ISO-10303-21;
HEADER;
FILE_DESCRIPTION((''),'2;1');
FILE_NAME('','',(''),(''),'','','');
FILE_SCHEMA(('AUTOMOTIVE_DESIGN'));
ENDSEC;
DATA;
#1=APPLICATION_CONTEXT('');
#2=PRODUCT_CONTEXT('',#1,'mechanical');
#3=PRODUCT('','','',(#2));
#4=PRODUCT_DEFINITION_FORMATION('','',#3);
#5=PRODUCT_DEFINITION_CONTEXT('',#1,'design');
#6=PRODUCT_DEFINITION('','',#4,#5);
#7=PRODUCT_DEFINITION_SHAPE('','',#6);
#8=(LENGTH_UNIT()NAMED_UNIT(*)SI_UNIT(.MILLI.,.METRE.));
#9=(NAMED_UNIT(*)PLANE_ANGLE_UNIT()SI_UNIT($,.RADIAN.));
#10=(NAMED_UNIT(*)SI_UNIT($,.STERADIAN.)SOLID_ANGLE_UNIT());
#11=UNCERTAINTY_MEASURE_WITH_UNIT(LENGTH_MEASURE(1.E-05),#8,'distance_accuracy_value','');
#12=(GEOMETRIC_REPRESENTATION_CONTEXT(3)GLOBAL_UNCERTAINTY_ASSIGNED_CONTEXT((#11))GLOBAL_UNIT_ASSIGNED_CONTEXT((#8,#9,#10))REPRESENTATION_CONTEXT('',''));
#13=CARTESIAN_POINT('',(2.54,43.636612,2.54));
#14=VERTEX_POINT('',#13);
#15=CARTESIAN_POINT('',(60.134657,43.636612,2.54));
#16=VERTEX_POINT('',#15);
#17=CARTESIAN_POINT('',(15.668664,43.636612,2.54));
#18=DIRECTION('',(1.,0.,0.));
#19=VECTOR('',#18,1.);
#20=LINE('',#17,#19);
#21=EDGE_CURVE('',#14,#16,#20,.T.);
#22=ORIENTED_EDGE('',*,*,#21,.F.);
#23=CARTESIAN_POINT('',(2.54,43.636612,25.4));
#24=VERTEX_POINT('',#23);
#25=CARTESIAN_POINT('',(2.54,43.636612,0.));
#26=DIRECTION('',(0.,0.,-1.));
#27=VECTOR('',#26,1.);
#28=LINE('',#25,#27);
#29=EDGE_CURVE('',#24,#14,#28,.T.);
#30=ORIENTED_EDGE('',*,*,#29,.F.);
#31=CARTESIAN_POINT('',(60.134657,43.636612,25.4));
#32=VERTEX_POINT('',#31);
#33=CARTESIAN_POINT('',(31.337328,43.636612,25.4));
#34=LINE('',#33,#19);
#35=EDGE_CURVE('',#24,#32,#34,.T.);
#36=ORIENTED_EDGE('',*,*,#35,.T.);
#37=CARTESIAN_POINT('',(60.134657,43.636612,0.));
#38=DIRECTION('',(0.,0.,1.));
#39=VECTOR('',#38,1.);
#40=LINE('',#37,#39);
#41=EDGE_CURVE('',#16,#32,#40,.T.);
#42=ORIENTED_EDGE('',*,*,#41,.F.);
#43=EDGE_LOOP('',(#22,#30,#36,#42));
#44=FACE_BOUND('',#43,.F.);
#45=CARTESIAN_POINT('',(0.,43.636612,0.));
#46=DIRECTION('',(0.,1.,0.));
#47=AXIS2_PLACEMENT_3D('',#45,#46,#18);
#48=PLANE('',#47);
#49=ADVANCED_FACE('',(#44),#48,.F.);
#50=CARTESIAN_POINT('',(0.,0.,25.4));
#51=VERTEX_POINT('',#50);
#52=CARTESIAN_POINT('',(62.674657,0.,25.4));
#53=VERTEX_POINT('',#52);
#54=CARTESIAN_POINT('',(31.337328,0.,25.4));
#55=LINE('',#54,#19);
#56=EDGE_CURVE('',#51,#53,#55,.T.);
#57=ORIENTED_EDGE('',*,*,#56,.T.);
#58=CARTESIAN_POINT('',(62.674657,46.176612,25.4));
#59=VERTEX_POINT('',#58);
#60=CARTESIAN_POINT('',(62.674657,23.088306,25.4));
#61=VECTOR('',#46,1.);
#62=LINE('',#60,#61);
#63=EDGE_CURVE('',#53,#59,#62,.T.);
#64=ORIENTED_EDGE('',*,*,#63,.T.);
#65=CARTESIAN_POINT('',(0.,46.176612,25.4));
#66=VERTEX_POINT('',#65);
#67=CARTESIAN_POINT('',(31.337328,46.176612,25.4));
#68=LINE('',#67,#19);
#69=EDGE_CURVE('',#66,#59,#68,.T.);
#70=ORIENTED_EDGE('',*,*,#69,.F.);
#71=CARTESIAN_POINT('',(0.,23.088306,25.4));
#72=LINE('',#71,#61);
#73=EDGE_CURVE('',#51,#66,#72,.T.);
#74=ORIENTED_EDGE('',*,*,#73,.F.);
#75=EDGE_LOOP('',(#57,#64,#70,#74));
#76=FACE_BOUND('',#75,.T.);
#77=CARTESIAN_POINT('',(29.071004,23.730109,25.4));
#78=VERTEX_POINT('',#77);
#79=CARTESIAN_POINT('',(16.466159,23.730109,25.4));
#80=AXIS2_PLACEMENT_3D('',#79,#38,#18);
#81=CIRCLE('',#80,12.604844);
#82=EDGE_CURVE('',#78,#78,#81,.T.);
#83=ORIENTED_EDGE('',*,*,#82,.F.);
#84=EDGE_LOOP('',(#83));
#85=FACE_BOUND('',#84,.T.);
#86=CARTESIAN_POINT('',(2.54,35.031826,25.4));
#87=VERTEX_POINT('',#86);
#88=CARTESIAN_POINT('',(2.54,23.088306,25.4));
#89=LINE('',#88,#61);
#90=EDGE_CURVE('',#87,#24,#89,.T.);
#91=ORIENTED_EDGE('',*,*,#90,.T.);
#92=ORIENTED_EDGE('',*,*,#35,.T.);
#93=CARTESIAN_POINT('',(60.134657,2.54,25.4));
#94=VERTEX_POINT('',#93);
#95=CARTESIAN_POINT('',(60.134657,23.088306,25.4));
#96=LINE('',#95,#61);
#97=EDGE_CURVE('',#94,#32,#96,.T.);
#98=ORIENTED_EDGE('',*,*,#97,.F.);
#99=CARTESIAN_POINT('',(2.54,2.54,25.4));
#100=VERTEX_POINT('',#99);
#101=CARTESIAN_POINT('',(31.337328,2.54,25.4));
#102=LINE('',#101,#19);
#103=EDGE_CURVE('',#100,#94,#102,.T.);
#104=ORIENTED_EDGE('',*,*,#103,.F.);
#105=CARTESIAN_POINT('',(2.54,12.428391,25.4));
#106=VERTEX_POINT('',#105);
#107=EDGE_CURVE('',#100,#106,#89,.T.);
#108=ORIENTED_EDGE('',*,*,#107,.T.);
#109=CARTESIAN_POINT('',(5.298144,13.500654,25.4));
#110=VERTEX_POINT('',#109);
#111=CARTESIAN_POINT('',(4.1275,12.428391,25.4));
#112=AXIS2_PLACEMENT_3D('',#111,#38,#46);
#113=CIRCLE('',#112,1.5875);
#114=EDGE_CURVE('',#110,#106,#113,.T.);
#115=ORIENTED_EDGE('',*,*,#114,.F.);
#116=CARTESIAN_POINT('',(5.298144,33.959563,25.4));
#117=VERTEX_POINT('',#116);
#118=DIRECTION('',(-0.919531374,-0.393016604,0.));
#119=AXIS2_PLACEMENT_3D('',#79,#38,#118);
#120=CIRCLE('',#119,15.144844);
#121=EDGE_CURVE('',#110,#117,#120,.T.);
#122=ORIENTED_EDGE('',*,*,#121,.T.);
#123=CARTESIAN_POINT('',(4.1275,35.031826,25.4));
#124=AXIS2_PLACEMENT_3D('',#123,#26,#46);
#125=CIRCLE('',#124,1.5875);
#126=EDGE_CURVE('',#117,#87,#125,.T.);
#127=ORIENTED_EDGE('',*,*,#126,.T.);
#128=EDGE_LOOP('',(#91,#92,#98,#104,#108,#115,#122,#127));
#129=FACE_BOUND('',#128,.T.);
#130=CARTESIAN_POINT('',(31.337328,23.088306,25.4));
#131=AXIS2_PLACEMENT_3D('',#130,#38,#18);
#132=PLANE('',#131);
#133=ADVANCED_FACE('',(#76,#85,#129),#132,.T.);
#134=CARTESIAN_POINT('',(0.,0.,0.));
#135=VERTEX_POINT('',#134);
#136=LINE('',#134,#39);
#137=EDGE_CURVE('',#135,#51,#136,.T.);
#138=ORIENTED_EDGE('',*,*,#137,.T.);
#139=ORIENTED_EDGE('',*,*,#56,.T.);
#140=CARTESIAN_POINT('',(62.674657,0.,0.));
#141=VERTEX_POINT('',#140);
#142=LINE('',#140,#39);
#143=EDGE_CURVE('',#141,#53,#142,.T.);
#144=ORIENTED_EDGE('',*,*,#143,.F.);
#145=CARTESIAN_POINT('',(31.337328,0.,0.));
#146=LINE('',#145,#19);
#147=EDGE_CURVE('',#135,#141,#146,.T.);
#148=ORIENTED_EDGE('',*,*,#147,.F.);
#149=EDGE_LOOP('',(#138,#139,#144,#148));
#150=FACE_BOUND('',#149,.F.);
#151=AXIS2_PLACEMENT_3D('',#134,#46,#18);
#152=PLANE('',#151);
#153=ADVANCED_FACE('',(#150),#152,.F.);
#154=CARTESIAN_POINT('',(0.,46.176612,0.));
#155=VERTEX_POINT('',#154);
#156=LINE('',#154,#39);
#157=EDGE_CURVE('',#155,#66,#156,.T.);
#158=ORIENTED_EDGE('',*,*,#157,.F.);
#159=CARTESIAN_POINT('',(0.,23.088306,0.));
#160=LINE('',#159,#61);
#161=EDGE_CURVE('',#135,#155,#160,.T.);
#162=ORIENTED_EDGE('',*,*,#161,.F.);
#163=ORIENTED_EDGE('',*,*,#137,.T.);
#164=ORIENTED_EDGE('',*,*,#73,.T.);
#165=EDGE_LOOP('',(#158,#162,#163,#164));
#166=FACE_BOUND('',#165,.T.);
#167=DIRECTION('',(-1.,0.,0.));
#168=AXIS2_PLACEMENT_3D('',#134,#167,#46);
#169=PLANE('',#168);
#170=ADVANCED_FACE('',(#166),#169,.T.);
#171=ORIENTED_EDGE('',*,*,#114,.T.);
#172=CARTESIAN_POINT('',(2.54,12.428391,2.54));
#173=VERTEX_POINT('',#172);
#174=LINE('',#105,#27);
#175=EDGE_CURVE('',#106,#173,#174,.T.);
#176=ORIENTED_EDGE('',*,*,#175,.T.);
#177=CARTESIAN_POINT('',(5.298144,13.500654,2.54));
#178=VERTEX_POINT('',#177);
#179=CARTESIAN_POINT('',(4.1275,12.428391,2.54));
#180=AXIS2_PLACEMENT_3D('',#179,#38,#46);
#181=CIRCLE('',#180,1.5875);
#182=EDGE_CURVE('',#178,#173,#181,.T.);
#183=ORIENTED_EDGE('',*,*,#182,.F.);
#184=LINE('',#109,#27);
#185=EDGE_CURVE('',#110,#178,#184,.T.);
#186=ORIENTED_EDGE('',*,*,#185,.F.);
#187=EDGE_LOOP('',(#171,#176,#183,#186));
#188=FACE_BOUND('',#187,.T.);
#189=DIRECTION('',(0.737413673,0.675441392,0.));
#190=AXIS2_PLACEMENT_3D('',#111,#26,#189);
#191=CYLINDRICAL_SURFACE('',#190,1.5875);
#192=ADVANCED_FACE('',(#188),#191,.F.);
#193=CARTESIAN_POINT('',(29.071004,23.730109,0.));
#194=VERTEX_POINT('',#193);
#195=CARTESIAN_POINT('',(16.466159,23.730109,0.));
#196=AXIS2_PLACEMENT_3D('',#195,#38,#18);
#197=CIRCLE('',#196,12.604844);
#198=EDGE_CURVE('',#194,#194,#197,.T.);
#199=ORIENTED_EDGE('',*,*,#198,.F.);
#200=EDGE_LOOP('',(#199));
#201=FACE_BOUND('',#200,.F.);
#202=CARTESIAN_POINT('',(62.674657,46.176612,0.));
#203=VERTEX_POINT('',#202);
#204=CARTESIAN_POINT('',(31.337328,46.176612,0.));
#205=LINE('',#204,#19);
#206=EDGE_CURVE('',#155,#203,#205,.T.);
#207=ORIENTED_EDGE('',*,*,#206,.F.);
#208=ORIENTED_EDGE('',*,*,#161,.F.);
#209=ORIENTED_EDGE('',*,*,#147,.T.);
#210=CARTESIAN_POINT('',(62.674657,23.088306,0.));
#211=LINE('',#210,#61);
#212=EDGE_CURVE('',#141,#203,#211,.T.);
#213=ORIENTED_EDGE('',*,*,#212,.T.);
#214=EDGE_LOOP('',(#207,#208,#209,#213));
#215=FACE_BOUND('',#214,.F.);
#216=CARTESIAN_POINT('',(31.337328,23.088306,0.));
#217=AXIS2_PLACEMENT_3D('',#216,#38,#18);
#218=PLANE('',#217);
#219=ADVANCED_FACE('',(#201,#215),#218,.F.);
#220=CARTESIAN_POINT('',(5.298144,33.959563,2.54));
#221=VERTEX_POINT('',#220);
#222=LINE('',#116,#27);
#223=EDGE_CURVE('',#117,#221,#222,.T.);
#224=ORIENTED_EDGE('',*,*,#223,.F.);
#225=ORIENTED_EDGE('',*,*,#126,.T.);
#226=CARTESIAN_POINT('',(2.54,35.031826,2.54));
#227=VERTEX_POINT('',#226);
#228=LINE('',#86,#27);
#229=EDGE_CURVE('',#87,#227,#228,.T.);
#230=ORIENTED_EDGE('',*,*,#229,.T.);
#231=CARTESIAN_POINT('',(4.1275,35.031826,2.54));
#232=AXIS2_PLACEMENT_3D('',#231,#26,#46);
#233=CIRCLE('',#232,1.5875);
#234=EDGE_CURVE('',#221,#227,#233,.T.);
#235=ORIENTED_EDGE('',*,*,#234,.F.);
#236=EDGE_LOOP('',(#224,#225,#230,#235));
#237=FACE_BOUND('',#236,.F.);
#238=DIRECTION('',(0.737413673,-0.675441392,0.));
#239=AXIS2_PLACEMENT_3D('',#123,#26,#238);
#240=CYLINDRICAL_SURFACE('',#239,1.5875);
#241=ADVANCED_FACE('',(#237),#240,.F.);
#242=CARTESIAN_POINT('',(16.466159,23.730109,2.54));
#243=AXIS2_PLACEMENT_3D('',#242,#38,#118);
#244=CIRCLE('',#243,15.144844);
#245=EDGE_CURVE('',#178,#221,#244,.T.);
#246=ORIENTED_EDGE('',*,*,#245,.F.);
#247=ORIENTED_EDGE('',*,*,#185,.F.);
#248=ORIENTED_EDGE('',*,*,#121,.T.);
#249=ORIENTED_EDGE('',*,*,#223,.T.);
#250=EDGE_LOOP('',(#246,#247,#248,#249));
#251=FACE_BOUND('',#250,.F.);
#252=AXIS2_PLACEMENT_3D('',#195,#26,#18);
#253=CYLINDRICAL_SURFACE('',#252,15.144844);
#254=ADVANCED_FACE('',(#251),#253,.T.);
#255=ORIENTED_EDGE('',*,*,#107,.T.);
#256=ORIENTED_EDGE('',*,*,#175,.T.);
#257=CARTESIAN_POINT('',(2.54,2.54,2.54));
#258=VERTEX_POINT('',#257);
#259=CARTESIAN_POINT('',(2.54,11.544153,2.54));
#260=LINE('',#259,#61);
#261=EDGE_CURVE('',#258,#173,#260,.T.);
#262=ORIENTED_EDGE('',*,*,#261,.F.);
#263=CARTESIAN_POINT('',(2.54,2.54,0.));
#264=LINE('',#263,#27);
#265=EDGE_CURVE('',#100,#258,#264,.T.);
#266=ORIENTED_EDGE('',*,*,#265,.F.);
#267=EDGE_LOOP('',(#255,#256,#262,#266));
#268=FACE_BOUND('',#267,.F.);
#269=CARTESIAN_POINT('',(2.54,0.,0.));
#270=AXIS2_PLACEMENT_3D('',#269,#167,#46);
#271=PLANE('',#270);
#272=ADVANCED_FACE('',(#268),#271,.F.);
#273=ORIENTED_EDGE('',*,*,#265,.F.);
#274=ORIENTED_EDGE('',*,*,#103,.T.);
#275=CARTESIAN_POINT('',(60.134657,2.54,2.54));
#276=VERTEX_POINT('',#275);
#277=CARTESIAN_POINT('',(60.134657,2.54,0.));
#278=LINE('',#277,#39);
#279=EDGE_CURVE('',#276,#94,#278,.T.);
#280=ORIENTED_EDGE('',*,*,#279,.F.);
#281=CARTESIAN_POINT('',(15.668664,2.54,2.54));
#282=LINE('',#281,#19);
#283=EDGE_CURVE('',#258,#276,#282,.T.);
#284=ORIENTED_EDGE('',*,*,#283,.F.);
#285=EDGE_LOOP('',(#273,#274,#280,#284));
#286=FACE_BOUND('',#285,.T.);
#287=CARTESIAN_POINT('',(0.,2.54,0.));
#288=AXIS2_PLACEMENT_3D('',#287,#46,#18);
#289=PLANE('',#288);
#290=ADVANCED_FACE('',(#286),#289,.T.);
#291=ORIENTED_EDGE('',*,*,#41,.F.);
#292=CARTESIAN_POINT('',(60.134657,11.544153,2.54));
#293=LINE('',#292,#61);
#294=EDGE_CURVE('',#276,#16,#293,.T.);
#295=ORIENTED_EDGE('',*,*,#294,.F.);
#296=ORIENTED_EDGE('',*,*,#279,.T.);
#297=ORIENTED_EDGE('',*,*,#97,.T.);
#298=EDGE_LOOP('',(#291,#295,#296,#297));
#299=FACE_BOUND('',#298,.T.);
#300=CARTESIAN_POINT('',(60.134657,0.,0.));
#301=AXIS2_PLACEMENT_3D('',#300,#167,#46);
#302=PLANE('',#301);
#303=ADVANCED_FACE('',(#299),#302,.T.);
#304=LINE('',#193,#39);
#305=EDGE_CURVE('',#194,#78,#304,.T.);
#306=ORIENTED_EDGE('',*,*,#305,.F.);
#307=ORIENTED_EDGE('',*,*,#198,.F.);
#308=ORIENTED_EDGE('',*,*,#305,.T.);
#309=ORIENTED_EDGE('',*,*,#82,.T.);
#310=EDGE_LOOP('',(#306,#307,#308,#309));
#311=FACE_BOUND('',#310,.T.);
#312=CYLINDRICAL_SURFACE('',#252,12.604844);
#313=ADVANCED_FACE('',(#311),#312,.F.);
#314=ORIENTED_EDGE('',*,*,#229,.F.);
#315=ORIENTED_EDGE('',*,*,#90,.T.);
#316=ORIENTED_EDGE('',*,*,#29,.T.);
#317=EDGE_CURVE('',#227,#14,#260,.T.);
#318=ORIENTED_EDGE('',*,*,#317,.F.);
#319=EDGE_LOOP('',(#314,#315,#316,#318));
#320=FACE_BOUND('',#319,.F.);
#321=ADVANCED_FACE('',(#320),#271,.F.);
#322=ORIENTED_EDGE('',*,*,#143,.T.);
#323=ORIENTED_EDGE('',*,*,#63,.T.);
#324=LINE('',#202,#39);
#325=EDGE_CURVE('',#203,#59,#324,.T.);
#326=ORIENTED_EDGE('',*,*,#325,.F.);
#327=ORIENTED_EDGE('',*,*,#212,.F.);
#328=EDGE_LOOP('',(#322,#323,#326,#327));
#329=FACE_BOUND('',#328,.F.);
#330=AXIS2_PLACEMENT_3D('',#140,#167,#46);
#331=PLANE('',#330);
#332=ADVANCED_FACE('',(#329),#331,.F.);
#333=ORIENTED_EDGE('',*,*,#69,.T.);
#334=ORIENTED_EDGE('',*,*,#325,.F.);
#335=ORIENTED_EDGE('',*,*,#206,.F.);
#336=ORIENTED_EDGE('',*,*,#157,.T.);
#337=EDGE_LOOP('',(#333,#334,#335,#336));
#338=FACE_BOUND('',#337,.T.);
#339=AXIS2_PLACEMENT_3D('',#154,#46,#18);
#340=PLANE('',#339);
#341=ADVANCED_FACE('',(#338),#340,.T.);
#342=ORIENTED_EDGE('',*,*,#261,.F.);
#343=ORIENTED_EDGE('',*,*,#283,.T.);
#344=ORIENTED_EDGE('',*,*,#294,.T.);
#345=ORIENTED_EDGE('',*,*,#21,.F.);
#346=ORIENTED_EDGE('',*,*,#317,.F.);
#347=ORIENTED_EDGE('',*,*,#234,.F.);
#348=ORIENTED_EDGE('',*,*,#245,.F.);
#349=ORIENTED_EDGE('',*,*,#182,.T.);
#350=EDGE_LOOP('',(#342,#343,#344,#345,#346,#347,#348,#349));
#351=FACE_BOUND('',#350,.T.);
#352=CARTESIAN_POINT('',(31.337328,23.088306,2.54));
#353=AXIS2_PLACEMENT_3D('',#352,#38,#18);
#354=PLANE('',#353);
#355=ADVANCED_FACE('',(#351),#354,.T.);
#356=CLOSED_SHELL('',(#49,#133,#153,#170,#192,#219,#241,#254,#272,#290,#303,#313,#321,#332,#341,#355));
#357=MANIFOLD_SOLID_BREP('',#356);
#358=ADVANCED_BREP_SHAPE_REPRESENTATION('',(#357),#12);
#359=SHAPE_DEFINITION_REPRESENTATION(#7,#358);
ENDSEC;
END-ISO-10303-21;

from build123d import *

# Parameters (mm, degrees)
F0_W     = 62.6746565104
F0_H     = 46.1766123772
F0_R     = 12.6048441678
F1_DEPTH = 25.4
F2_T     = -2.54
F3_R     = 1.5875


with BuildPart() as f1:
    # F0 (on Top) → F1 (new body)
    with BuildSketch(Plane.XY):
        with Locations((31.3373282552, 23.0883061886)):
            Rectangle(F0_W, F0_H)
        with Locations((16.4661593735, 23.7301085144)):
            Circle(F0_R, mode=Mode.SUBTRACT)
    extrude(amount=F1_DEPTH)

    # F2
    f2_openings = [f1.faces().sort_by_distance(p)[0] for p in [
        (34.436685, 22.954546, 25.4),
    ]]
    offset(amount=F2_T, openings=f2_openings)

    # F3
    f3_edges = [f1.edges().sort_by_distance(p)[0] for p in [
        (2.54, 29.682284, 13.97),
        (2.54, 17.777933, 13.97),
    ]]
    fillet(f3_edges, radius=F3_R)


solid = f1.part
